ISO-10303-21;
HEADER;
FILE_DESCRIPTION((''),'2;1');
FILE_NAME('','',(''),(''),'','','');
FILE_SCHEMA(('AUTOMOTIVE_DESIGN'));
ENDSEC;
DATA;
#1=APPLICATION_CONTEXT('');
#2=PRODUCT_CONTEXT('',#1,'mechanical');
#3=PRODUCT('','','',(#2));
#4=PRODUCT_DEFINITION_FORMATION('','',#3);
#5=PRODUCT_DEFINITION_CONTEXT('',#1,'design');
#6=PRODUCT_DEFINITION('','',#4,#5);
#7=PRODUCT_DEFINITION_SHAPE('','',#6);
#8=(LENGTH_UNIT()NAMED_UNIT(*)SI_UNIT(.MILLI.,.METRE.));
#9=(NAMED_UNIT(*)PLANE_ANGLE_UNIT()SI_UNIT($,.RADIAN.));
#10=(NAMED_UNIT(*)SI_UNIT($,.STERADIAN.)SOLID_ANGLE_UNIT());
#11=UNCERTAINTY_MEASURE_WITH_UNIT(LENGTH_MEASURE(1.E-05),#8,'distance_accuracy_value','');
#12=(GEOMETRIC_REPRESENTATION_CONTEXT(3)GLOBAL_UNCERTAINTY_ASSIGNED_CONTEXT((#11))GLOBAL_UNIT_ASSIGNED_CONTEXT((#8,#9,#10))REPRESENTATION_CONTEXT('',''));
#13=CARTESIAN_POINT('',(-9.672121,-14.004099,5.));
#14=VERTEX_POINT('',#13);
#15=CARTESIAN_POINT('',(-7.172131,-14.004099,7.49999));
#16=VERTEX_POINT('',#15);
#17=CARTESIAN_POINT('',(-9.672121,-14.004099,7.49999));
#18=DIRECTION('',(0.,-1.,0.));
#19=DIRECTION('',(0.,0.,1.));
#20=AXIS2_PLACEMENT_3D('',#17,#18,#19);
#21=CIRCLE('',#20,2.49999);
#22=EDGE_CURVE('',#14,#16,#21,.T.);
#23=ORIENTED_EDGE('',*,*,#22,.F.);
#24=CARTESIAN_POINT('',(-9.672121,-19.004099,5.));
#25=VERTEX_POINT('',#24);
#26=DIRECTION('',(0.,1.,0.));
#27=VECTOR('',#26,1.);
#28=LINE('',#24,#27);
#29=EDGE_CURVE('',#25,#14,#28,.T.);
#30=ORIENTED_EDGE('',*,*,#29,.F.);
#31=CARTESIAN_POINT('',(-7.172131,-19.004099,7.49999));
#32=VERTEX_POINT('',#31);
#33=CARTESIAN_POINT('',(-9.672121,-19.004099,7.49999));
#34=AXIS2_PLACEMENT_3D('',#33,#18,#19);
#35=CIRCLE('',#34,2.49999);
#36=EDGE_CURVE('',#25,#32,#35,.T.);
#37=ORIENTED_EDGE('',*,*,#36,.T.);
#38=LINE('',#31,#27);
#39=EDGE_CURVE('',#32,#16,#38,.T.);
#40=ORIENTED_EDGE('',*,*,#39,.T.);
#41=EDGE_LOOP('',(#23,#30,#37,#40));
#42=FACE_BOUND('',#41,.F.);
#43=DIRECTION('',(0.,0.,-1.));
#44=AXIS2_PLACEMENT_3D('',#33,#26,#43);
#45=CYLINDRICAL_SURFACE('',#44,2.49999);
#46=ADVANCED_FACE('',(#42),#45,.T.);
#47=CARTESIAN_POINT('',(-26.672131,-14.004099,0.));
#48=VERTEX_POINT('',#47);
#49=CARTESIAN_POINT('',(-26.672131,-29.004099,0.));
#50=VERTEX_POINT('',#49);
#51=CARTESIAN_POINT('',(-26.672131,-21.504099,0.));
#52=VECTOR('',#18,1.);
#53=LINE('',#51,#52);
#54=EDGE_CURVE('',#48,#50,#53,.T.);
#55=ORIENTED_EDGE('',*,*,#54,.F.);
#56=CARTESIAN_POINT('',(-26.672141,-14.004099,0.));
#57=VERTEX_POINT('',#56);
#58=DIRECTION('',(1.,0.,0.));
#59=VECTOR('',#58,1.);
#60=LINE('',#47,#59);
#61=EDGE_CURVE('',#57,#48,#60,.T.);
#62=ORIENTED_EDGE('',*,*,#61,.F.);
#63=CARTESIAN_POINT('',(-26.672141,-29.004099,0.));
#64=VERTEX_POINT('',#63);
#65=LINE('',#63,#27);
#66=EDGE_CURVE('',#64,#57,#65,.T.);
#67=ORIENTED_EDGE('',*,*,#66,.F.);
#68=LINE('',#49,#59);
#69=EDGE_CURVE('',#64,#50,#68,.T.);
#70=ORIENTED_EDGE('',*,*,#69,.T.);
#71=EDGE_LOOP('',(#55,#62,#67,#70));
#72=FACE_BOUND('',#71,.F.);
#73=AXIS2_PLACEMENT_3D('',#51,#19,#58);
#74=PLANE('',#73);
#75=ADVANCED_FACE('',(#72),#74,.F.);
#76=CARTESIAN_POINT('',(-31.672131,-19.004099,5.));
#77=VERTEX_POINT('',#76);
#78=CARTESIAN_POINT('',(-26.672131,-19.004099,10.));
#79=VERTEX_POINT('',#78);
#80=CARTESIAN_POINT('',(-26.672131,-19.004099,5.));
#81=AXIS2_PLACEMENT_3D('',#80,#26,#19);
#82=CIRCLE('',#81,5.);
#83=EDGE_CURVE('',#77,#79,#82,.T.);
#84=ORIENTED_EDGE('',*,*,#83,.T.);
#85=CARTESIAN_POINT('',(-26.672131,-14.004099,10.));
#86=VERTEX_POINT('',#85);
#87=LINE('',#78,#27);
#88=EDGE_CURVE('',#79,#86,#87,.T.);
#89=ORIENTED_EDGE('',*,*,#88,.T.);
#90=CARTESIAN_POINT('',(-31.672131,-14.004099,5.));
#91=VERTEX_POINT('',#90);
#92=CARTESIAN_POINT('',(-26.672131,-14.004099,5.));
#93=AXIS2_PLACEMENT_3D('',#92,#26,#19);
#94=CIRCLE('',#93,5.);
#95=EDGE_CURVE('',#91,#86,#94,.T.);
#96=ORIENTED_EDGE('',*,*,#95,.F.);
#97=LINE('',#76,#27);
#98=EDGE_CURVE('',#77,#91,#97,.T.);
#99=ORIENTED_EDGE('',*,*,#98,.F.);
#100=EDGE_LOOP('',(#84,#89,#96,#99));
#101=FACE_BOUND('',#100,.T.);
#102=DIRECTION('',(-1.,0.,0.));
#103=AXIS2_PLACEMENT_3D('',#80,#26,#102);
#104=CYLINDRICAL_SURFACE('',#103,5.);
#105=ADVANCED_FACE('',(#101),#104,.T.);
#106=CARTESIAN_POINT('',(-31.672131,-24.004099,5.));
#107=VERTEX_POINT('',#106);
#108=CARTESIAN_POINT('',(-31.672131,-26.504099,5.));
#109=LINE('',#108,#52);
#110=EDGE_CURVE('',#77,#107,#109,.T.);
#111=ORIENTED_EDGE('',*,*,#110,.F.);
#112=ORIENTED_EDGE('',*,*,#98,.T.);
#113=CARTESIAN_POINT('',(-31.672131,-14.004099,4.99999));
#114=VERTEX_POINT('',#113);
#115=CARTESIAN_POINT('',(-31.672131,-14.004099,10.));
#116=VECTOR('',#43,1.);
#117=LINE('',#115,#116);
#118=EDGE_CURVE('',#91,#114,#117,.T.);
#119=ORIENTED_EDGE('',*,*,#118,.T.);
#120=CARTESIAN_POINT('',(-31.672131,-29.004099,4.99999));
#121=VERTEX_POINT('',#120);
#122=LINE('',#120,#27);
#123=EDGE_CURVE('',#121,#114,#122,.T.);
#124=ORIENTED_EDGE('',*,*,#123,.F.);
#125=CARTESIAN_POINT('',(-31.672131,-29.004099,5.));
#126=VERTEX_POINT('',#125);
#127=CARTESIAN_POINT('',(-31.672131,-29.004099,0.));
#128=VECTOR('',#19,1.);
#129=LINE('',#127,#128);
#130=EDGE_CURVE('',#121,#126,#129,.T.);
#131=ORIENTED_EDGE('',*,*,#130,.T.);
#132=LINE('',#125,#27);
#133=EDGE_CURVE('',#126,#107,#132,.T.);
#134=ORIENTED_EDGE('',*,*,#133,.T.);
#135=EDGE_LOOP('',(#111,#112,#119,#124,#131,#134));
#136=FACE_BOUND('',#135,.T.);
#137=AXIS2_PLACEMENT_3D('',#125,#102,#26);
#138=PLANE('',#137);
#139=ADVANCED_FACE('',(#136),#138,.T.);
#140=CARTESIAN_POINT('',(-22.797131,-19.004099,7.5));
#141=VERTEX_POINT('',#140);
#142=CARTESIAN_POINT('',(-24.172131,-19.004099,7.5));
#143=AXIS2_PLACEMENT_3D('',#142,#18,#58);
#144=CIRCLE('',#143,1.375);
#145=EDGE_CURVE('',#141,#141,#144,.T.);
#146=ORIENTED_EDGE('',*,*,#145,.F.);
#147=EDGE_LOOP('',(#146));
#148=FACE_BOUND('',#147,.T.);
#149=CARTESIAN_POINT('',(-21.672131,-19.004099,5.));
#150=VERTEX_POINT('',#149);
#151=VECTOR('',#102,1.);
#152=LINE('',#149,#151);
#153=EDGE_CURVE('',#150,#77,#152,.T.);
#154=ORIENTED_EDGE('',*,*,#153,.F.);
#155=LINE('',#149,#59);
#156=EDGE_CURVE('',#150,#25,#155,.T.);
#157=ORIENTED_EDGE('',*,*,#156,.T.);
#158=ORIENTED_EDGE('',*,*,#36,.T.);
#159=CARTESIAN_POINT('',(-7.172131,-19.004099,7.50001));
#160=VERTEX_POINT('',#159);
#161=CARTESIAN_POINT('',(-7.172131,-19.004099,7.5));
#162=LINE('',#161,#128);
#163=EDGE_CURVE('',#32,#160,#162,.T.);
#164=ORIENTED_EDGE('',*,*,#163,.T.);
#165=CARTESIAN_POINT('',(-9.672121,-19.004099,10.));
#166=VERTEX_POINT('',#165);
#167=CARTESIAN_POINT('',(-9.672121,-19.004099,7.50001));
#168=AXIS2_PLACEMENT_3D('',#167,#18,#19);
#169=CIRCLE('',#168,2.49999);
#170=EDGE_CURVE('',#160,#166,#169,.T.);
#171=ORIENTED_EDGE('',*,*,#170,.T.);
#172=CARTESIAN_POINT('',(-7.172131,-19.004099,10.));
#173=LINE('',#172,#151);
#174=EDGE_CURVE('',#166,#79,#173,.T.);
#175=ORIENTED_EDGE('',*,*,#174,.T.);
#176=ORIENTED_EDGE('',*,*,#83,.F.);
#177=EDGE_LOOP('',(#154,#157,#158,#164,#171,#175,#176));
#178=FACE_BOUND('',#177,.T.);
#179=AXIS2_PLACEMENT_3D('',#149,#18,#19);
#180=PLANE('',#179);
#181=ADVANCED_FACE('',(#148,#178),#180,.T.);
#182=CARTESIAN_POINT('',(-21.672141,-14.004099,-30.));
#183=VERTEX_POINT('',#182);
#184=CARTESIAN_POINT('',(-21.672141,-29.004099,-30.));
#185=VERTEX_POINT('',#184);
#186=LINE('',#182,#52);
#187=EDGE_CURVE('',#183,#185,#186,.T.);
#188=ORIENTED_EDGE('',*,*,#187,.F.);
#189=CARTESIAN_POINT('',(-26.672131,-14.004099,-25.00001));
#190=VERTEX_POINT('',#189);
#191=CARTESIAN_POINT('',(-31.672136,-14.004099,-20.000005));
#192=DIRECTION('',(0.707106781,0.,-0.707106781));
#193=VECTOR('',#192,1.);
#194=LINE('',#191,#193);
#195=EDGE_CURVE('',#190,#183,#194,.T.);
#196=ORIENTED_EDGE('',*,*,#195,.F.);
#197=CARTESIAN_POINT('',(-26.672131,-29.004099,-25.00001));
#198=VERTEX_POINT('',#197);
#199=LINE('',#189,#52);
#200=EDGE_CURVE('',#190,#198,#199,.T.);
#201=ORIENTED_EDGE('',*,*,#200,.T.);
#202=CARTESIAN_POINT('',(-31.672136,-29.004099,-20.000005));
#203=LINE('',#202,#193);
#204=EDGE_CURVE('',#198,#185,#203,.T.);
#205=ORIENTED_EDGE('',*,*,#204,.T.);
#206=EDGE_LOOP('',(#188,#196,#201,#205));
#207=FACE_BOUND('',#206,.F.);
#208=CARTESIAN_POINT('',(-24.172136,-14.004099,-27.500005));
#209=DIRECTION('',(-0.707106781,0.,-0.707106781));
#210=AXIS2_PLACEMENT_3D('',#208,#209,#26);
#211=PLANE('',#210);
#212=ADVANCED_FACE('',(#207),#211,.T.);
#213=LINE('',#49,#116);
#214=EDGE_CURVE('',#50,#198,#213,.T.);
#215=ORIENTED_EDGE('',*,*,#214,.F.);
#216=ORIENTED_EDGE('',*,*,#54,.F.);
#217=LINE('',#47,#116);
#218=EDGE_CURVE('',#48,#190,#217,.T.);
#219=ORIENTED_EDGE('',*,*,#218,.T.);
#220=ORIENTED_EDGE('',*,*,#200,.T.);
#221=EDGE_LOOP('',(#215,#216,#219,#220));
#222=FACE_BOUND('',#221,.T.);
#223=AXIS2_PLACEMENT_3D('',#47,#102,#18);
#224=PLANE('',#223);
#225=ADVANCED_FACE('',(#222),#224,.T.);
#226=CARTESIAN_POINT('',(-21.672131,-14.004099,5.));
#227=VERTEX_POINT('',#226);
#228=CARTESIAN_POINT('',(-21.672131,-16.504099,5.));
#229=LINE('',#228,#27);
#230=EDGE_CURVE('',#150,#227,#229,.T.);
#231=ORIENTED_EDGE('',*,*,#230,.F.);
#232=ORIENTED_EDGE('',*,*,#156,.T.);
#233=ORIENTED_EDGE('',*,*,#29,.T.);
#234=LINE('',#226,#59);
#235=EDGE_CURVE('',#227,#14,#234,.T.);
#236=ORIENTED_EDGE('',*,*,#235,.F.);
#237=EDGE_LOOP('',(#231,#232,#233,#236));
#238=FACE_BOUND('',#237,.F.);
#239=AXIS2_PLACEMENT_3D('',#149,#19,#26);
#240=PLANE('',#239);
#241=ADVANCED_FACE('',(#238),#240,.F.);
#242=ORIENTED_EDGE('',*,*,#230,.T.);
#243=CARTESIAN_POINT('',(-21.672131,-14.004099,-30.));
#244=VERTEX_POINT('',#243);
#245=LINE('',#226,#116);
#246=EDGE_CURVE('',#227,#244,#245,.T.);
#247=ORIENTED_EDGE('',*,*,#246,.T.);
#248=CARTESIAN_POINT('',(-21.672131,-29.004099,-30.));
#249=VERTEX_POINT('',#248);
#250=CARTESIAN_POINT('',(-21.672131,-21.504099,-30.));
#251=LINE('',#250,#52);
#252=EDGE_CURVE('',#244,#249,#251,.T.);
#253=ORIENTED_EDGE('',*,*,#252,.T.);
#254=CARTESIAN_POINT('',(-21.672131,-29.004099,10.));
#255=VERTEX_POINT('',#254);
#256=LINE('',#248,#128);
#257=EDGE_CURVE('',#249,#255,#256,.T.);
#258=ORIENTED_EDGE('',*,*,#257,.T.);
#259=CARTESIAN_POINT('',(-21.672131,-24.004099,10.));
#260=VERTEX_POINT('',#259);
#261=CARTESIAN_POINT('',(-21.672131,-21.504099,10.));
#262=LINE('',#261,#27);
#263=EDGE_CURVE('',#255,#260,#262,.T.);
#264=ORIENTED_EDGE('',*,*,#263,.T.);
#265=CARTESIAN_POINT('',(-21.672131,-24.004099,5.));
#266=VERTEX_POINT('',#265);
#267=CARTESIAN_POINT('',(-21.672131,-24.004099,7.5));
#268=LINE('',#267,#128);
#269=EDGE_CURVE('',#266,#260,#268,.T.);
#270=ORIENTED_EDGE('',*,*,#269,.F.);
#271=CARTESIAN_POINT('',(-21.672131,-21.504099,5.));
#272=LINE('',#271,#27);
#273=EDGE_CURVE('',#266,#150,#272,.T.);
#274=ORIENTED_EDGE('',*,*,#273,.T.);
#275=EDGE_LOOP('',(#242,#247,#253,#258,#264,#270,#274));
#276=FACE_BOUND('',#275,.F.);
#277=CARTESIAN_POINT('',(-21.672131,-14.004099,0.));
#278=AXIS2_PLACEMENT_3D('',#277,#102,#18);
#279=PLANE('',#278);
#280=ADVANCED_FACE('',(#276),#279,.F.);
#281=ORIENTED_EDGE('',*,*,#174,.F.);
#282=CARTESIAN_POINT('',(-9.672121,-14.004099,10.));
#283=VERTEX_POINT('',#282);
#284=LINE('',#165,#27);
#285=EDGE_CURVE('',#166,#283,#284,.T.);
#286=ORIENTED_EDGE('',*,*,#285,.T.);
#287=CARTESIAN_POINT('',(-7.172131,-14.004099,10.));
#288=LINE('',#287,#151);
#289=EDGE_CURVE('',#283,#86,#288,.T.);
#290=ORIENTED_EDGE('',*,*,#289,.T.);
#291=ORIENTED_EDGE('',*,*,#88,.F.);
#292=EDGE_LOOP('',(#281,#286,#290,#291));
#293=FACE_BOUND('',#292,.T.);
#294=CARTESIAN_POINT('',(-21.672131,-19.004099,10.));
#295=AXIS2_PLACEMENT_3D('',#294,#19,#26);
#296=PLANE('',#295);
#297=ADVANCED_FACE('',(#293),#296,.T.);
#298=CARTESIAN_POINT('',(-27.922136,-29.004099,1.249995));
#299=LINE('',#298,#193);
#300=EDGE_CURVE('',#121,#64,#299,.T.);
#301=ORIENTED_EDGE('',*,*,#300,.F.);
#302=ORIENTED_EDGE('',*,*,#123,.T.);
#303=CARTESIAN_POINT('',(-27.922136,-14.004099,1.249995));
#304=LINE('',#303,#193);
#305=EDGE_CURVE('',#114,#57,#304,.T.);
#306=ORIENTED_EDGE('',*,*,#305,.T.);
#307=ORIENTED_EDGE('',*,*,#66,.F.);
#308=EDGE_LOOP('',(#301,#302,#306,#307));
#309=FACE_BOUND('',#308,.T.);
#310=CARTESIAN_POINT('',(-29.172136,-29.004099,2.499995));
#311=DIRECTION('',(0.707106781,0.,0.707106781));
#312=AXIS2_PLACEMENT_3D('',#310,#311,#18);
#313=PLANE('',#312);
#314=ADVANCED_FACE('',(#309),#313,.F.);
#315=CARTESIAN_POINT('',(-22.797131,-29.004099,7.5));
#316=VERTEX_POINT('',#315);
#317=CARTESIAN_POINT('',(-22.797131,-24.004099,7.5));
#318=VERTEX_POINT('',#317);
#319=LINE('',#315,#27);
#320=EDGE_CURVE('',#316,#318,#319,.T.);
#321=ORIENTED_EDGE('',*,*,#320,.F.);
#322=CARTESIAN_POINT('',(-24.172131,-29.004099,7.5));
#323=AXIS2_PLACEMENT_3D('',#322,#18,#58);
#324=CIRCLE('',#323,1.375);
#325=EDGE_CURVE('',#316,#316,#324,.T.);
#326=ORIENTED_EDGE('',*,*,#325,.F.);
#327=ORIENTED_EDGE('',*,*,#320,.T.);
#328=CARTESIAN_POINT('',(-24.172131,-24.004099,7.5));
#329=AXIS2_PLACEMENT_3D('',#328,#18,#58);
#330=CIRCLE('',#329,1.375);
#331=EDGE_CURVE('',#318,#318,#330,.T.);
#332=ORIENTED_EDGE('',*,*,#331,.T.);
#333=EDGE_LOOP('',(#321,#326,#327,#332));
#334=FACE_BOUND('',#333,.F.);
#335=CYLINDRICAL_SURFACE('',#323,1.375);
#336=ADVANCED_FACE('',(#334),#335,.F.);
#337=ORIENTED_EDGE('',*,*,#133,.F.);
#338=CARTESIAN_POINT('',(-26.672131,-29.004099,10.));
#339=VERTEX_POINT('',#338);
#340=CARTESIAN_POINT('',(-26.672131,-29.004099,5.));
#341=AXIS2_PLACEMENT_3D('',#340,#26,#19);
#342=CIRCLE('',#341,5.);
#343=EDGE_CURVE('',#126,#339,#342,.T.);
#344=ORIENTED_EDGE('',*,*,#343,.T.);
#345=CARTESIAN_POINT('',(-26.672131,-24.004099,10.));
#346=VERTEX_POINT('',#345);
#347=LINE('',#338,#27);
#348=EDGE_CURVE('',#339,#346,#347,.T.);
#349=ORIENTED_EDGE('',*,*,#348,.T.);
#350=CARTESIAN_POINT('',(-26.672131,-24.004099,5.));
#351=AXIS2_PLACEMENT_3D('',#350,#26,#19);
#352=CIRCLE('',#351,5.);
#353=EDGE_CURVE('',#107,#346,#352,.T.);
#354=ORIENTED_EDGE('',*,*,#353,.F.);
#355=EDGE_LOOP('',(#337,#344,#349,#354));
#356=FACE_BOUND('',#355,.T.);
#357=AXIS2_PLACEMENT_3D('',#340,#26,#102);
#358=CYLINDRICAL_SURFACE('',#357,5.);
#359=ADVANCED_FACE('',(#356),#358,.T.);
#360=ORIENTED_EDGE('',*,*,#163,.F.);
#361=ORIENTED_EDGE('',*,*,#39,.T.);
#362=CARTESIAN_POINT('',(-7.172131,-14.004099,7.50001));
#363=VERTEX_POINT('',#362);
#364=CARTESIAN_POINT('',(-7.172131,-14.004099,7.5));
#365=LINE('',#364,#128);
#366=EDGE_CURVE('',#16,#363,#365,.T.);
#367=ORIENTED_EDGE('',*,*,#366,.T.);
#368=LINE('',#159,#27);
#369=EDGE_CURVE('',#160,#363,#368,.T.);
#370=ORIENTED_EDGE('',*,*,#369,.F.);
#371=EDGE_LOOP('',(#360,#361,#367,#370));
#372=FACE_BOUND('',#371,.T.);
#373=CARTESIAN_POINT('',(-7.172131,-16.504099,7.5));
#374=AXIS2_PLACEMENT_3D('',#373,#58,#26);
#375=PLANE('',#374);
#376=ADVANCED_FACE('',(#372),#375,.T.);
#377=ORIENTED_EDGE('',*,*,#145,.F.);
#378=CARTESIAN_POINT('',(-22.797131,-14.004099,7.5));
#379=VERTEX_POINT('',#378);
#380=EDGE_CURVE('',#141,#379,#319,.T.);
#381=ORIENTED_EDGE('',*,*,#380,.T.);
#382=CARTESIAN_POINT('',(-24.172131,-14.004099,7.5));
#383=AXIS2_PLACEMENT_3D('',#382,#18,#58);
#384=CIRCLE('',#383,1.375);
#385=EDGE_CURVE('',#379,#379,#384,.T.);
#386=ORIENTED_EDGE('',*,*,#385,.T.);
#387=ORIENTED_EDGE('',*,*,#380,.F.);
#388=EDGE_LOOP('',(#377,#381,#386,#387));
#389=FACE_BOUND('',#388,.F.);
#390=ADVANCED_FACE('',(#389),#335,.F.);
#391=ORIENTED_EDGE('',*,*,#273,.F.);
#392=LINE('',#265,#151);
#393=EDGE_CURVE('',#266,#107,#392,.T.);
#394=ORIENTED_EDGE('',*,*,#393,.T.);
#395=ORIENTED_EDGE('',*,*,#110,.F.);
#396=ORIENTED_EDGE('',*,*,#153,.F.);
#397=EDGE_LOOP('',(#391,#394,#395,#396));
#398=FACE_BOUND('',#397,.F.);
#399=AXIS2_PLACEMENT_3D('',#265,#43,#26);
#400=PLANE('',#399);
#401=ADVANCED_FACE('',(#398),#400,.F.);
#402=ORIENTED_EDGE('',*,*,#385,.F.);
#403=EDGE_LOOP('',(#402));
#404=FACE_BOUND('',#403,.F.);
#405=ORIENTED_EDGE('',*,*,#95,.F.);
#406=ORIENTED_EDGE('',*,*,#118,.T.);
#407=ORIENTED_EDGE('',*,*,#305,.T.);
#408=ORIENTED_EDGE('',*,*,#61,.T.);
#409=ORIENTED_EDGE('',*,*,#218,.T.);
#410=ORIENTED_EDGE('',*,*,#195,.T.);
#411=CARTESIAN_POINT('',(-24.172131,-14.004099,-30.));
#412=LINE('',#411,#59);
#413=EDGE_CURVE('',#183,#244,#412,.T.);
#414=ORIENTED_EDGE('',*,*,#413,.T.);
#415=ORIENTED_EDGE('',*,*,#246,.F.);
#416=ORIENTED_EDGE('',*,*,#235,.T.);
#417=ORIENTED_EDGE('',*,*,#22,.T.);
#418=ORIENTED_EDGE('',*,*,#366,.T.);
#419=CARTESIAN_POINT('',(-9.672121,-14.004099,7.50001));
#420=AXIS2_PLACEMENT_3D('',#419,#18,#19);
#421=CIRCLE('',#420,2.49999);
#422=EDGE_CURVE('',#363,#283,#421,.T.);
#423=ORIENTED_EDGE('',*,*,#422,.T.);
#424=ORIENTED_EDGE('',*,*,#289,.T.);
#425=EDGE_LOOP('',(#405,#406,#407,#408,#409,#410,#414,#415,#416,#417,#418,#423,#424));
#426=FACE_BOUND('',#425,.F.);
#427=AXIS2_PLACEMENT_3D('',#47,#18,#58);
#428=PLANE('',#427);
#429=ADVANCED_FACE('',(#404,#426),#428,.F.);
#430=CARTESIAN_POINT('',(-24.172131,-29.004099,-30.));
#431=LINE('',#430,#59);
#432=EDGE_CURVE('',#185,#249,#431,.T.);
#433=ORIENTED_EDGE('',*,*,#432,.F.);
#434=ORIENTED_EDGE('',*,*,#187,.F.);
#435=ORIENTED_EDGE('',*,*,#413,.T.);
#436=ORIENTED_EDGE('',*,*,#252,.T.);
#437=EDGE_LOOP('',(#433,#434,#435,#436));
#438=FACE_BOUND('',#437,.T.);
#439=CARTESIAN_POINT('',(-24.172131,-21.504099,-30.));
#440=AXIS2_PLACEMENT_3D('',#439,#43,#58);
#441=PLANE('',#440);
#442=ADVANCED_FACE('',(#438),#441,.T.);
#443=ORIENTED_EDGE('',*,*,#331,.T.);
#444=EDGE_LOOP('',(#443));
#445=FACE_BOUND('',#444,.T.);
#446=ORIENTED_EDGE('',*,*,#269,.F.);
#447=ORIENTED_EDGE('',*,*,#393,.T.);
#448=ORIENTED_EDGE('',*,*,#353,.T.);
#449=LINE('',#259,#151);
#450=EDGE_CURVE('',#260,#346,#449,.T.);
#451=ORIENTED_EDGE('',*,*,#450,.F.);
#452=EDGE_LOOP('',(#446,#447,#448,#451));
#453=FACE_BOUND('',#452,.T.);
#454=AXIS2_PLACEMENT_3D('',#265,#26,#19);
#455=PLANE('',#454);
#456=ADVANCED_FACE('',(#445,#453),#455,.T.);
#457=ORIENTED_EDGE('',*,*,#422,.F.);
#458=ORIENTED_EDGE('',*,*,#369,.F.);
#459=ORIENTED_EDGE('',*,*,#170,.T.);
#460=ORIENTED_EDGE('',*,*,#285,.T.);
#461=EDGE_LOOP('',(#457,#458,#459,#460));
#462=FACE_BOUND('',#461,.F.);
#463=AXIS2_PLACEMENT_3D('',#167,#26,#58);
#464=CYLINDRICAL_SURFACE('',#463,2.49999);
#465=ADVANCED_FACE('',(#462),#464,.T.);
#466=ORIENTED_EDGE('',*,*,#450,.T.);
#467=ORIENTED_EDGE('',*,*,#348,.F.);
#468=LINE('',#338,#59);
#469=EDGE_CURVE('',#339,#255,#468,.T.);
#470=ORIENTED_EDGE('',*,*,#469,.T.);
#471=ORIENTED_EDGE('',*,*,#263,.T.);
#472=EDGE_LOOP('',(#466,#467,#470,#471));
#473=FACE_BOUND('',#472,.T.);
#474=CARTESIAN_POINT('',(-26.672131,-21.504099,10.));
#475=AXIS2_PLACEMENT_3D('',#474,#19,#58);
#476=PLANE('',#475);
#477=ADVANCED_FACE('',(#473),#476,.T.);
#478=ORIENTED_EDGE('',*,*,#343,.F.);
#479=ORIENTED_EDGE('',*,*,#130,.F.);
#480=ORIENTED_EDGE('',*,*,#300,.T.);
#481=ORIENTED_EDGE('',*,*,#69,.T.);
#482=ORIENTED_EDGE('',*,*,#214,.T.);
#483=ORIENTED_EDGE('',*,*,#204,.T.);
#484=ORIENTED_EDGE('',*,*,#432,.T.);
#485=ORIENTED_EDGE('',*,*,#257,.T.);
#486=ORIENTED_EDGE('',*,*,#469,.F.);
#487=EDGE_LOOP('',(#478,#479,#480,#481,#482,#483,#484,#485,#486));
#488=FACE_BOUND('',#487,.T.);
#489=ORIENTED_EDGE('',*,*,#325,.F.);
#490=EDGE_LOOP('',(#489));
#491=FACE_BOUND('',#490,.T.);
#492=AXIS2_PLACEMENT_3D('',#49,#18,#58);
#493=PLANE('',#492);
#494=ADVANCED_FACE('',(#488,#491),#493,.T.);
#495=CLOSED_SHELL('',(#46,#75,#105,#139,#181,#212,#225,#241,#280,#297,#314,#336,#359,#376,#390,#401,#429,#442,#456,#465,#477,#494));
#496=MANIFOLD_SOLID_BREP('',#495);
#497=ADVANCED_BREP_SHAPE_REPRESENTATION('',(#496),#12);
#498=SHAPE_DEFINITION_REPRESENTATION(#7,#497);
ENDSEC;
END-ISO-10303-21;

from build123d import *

# Parameters (mm, degrees)
F0_W      = 10
F0_H      = 15
F1_DEPTH  = 5
F2_DEPTH  = 5
F3_R      = 1.375
F4_DEPTH  = 15.001
F5_W      = 5
F5_H      = 5
F6_DEPTH  = 10.001
F7_W      = 5
F7_H      = 5
F8_DEPTH  = 14.5
F9_W      = 5
F9_H      = 15
F10_DEPTH = 30
F11_R     = 2.49999
F12_SIZE  = 4.99999
F13_R     = 5
F14_SIZE  = 4.99999


# Not quite as in the source:
# - a fillet or chamfer is up to 0.001 mm smaller than in the source, because OpenCascade refuses the exact size


with BuildPart() as f1:
    # F0 (on Top) → F1 (new body)
    with BuildSketch(Plane.XY):
        with Locations((-26.6721312702, -21.5040988475)):
            Rectangle(F0_W, F0_H)
    extrude(amount=F1_DEPTH)

    # F2 (add): a face of the model
    f2_faces = [f1.faces().sort_by_distance(p)[0] for p in [
        (-26.6721312702, -21.5040988475, 5),
    ]]
    extrude(f2_faces, amount=F2_DEPTH)

    # F3 (on face) → F4 (cut, through all)
    with BuildSketch(Plane.XZ.offset(29.0040988475)):
        with Locations((-24.1721312702, 7.5)):
            Circle(F3_R)
    extrude(amount=-F4_DEPTH, mode=Mode.SUBTRACT)

    # F5 (on face) → F6 (cut, through all)
    with BuildSketch(Plane.YZ.offset(-21.6721312702)):
        with Locations((-21.5040988475, 7.5)):
            Rectangle(F5_W, F5_H)
    extrude(amount=-F6_DEPTH, mode=Mode.SUBTRACT)

    # F7 (on face) → F8 (join)
    with BuildSketch(Plane.YZ.offset(-21.6721312702)):
        with Locations((-16.5040988475, 7.5)):
            Rectangle(F7_W, F7_H)
    extrude(amount=F8_DEPTH)

    # F9 (on face) → F10 (join)
    with BuildSketch(Plane(origin=(0, 0, 0), x_dir=(1, 0, 0), z_dir=(0, 0, -1))):
        with Locations((-24.1721312702, 21.5040988475)):
            Rectangle(F9_W, F9_H)
    extrude(amount=F10_DEPTH)

    # F11 (radius 2.5 in the source; OpenCascade refuses exactly that, so slightly less here)
    f11_edges = [f1.edges().sort_by_distance(p)[0] for p in [
        (-7.172131, -16.504099, 10),
        (-7.172131, -16.504099, 5),
    ]]
    fillet(f11_edges, radius=F11_R)

    # F12 (size 5 in the source; OpenCascade refuses exactly that, so slightly less here)
    f12_edges = [f1.edges().sort_by_distance(p)[0] for p in [
        (-31.672131, -21.504099, 0),
    ]]
    chamfer(f12_edges, length=F12_SIZE)

    # F13
    f13_edges = [f1.edges().sort_by_distance(p)[0] for p in [
        (-31.672131, -16.504099, 10),
        (-31.672131, -26.504099, 10),
    ]]
    fillet(f13_edges, radius=F13_R)

    # F14 (size 5 in the source; OpenCascade refuses exactly that, so slightly less here)
    f14_edges = [f1.edges().sort_by_distance(p)[0] for p in [
        (-26.672131, -21.504099, -30),
    ]]
    chamfer(f14_edges, length=F14_SIZE)


solid = f1.part
